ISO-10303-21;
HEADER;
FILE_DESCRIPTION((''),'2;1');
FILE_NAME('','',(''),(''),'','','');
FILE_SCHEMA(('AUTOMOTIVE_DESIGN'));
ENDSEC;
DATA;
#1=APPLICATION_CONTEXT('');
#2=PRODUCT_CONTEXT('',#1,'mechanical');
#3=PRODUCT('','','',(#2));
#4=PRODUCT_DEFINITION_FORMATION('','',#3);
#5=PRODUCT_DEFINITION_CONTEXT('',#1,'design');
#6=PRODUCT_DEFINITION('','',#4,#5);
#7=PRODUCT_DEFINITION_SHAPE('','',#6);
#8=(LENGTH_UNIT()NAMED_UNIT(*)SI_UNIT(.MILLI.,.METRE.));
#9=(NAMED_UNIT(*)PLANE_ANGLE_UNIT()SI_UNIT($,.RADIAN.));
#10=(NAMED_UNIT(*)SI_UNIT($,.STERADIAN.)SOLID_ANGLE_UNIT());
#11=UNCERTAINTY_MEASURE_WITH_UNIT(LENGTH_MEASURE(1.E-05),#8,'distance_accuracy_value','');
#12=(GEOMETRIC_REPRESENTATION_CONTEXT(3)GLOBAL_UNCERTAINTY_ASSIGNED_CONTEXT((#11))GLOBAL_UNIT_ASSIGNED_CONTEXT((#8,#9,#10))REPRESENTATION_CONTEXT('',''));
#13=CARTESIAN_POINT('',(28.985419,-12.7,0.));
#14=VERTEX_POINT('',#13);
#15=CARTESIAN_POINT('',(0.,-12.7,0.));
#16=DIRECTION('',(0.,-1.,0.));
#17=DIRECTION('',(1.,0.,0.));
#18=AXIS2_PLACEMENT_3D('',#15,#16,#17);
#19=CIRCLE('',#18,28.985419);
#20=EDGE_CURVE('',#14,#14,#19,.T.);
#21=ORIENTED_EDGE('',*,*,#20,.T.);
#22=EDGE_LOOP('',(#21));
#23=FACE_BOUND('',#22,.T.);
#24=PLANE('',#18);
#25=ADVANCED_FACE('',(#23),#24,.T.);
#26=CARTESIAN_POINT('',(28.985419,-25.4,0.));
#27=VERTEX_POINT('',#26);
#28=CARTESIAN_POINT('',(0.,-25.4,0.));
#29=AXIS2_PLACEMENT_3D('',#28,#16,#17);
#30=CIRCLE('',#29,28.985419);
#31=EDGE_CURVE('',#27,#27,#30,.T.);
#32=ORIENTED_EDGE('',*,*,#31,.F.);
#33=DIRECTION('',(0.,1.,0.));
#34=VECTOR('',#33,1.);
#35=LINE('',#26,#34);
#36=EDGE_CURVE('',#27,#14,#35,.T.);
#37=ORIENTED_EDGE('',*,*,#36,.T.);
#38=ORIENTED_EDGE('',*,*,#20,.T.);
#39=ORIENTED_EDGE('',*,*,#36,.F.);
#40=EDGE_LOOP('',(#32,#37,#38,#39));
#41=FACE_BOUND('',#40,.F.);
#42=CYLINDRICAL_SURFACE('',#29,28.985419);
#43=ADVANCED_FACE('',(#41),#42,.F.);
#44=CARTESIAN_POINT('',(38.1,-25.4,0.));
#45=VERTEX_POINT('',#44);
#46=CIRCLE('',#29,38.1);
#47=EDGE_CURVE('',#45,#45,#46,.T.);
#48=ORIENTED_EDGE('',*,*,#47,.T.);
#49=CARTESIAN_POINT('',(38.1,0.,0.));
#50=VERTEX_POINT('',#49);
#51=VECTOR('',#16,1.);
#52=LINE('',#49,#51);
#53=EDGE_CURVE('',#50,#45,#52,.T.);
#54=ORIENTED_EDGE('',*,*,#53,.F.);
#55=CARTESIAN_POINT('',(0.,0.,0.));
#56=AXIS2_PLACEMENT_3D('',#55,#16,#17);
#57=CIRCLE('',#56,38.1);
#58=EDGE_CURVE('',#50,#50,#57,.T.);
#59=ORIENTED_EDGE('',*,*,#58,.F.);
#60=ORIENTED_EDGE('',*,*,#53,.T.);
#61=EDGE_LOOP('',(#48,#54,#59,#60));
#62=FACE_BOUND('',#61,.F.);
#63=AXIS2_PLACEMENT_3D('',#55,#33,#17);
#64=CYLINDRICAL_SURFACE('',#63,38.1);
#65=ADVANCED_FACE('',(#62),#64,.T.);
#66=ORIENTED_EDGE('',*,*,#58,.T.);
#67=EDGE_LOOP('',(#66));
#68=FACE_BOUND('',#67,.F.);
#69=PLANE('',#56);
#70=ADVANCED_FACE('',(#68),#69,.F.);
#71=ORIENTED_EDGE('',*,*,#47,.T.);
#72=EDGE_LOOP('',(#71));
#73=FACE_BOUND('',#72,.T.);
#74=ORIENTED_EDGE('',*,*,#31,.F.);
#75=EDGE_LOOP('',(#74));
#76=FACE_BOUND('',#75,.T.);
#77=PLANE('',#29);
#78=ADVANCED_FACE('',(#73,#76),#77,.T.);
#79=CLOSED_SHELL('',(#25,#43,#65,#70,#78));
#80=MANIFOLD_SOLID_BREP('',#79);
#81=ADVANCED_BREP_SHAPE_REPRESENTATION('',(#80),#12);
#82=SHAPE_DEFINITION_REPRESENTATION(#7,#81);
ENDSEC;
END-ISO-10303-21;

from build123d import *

# Parameters (mm, degrees)
F0_R     = 38.1
F1_DEPTH = 25.4
F2_R     = 28.9854194273
F3_DEPTH = 12.7


# Not quite as in the source:
# - the program builds the solid bodies; features that only make, move or delete a surface that nothing else refers to are left out


with BuildPart() as f1:
    # F0 (on Front) → F1 (new body)
    with BuildSketch(Plane.XZ):
        Circle(F0_R)
    extrude(amount=F1_DEPTH)

    # F2 (on face) → F3 (cut)
    with BuildSketch(Plane.XZ.offset(25.4)):
        Circle(F2_R)
    extrude(amount=-F3_DEPTH, mode=Mode.SUBTRACT)


solid = f1.part
